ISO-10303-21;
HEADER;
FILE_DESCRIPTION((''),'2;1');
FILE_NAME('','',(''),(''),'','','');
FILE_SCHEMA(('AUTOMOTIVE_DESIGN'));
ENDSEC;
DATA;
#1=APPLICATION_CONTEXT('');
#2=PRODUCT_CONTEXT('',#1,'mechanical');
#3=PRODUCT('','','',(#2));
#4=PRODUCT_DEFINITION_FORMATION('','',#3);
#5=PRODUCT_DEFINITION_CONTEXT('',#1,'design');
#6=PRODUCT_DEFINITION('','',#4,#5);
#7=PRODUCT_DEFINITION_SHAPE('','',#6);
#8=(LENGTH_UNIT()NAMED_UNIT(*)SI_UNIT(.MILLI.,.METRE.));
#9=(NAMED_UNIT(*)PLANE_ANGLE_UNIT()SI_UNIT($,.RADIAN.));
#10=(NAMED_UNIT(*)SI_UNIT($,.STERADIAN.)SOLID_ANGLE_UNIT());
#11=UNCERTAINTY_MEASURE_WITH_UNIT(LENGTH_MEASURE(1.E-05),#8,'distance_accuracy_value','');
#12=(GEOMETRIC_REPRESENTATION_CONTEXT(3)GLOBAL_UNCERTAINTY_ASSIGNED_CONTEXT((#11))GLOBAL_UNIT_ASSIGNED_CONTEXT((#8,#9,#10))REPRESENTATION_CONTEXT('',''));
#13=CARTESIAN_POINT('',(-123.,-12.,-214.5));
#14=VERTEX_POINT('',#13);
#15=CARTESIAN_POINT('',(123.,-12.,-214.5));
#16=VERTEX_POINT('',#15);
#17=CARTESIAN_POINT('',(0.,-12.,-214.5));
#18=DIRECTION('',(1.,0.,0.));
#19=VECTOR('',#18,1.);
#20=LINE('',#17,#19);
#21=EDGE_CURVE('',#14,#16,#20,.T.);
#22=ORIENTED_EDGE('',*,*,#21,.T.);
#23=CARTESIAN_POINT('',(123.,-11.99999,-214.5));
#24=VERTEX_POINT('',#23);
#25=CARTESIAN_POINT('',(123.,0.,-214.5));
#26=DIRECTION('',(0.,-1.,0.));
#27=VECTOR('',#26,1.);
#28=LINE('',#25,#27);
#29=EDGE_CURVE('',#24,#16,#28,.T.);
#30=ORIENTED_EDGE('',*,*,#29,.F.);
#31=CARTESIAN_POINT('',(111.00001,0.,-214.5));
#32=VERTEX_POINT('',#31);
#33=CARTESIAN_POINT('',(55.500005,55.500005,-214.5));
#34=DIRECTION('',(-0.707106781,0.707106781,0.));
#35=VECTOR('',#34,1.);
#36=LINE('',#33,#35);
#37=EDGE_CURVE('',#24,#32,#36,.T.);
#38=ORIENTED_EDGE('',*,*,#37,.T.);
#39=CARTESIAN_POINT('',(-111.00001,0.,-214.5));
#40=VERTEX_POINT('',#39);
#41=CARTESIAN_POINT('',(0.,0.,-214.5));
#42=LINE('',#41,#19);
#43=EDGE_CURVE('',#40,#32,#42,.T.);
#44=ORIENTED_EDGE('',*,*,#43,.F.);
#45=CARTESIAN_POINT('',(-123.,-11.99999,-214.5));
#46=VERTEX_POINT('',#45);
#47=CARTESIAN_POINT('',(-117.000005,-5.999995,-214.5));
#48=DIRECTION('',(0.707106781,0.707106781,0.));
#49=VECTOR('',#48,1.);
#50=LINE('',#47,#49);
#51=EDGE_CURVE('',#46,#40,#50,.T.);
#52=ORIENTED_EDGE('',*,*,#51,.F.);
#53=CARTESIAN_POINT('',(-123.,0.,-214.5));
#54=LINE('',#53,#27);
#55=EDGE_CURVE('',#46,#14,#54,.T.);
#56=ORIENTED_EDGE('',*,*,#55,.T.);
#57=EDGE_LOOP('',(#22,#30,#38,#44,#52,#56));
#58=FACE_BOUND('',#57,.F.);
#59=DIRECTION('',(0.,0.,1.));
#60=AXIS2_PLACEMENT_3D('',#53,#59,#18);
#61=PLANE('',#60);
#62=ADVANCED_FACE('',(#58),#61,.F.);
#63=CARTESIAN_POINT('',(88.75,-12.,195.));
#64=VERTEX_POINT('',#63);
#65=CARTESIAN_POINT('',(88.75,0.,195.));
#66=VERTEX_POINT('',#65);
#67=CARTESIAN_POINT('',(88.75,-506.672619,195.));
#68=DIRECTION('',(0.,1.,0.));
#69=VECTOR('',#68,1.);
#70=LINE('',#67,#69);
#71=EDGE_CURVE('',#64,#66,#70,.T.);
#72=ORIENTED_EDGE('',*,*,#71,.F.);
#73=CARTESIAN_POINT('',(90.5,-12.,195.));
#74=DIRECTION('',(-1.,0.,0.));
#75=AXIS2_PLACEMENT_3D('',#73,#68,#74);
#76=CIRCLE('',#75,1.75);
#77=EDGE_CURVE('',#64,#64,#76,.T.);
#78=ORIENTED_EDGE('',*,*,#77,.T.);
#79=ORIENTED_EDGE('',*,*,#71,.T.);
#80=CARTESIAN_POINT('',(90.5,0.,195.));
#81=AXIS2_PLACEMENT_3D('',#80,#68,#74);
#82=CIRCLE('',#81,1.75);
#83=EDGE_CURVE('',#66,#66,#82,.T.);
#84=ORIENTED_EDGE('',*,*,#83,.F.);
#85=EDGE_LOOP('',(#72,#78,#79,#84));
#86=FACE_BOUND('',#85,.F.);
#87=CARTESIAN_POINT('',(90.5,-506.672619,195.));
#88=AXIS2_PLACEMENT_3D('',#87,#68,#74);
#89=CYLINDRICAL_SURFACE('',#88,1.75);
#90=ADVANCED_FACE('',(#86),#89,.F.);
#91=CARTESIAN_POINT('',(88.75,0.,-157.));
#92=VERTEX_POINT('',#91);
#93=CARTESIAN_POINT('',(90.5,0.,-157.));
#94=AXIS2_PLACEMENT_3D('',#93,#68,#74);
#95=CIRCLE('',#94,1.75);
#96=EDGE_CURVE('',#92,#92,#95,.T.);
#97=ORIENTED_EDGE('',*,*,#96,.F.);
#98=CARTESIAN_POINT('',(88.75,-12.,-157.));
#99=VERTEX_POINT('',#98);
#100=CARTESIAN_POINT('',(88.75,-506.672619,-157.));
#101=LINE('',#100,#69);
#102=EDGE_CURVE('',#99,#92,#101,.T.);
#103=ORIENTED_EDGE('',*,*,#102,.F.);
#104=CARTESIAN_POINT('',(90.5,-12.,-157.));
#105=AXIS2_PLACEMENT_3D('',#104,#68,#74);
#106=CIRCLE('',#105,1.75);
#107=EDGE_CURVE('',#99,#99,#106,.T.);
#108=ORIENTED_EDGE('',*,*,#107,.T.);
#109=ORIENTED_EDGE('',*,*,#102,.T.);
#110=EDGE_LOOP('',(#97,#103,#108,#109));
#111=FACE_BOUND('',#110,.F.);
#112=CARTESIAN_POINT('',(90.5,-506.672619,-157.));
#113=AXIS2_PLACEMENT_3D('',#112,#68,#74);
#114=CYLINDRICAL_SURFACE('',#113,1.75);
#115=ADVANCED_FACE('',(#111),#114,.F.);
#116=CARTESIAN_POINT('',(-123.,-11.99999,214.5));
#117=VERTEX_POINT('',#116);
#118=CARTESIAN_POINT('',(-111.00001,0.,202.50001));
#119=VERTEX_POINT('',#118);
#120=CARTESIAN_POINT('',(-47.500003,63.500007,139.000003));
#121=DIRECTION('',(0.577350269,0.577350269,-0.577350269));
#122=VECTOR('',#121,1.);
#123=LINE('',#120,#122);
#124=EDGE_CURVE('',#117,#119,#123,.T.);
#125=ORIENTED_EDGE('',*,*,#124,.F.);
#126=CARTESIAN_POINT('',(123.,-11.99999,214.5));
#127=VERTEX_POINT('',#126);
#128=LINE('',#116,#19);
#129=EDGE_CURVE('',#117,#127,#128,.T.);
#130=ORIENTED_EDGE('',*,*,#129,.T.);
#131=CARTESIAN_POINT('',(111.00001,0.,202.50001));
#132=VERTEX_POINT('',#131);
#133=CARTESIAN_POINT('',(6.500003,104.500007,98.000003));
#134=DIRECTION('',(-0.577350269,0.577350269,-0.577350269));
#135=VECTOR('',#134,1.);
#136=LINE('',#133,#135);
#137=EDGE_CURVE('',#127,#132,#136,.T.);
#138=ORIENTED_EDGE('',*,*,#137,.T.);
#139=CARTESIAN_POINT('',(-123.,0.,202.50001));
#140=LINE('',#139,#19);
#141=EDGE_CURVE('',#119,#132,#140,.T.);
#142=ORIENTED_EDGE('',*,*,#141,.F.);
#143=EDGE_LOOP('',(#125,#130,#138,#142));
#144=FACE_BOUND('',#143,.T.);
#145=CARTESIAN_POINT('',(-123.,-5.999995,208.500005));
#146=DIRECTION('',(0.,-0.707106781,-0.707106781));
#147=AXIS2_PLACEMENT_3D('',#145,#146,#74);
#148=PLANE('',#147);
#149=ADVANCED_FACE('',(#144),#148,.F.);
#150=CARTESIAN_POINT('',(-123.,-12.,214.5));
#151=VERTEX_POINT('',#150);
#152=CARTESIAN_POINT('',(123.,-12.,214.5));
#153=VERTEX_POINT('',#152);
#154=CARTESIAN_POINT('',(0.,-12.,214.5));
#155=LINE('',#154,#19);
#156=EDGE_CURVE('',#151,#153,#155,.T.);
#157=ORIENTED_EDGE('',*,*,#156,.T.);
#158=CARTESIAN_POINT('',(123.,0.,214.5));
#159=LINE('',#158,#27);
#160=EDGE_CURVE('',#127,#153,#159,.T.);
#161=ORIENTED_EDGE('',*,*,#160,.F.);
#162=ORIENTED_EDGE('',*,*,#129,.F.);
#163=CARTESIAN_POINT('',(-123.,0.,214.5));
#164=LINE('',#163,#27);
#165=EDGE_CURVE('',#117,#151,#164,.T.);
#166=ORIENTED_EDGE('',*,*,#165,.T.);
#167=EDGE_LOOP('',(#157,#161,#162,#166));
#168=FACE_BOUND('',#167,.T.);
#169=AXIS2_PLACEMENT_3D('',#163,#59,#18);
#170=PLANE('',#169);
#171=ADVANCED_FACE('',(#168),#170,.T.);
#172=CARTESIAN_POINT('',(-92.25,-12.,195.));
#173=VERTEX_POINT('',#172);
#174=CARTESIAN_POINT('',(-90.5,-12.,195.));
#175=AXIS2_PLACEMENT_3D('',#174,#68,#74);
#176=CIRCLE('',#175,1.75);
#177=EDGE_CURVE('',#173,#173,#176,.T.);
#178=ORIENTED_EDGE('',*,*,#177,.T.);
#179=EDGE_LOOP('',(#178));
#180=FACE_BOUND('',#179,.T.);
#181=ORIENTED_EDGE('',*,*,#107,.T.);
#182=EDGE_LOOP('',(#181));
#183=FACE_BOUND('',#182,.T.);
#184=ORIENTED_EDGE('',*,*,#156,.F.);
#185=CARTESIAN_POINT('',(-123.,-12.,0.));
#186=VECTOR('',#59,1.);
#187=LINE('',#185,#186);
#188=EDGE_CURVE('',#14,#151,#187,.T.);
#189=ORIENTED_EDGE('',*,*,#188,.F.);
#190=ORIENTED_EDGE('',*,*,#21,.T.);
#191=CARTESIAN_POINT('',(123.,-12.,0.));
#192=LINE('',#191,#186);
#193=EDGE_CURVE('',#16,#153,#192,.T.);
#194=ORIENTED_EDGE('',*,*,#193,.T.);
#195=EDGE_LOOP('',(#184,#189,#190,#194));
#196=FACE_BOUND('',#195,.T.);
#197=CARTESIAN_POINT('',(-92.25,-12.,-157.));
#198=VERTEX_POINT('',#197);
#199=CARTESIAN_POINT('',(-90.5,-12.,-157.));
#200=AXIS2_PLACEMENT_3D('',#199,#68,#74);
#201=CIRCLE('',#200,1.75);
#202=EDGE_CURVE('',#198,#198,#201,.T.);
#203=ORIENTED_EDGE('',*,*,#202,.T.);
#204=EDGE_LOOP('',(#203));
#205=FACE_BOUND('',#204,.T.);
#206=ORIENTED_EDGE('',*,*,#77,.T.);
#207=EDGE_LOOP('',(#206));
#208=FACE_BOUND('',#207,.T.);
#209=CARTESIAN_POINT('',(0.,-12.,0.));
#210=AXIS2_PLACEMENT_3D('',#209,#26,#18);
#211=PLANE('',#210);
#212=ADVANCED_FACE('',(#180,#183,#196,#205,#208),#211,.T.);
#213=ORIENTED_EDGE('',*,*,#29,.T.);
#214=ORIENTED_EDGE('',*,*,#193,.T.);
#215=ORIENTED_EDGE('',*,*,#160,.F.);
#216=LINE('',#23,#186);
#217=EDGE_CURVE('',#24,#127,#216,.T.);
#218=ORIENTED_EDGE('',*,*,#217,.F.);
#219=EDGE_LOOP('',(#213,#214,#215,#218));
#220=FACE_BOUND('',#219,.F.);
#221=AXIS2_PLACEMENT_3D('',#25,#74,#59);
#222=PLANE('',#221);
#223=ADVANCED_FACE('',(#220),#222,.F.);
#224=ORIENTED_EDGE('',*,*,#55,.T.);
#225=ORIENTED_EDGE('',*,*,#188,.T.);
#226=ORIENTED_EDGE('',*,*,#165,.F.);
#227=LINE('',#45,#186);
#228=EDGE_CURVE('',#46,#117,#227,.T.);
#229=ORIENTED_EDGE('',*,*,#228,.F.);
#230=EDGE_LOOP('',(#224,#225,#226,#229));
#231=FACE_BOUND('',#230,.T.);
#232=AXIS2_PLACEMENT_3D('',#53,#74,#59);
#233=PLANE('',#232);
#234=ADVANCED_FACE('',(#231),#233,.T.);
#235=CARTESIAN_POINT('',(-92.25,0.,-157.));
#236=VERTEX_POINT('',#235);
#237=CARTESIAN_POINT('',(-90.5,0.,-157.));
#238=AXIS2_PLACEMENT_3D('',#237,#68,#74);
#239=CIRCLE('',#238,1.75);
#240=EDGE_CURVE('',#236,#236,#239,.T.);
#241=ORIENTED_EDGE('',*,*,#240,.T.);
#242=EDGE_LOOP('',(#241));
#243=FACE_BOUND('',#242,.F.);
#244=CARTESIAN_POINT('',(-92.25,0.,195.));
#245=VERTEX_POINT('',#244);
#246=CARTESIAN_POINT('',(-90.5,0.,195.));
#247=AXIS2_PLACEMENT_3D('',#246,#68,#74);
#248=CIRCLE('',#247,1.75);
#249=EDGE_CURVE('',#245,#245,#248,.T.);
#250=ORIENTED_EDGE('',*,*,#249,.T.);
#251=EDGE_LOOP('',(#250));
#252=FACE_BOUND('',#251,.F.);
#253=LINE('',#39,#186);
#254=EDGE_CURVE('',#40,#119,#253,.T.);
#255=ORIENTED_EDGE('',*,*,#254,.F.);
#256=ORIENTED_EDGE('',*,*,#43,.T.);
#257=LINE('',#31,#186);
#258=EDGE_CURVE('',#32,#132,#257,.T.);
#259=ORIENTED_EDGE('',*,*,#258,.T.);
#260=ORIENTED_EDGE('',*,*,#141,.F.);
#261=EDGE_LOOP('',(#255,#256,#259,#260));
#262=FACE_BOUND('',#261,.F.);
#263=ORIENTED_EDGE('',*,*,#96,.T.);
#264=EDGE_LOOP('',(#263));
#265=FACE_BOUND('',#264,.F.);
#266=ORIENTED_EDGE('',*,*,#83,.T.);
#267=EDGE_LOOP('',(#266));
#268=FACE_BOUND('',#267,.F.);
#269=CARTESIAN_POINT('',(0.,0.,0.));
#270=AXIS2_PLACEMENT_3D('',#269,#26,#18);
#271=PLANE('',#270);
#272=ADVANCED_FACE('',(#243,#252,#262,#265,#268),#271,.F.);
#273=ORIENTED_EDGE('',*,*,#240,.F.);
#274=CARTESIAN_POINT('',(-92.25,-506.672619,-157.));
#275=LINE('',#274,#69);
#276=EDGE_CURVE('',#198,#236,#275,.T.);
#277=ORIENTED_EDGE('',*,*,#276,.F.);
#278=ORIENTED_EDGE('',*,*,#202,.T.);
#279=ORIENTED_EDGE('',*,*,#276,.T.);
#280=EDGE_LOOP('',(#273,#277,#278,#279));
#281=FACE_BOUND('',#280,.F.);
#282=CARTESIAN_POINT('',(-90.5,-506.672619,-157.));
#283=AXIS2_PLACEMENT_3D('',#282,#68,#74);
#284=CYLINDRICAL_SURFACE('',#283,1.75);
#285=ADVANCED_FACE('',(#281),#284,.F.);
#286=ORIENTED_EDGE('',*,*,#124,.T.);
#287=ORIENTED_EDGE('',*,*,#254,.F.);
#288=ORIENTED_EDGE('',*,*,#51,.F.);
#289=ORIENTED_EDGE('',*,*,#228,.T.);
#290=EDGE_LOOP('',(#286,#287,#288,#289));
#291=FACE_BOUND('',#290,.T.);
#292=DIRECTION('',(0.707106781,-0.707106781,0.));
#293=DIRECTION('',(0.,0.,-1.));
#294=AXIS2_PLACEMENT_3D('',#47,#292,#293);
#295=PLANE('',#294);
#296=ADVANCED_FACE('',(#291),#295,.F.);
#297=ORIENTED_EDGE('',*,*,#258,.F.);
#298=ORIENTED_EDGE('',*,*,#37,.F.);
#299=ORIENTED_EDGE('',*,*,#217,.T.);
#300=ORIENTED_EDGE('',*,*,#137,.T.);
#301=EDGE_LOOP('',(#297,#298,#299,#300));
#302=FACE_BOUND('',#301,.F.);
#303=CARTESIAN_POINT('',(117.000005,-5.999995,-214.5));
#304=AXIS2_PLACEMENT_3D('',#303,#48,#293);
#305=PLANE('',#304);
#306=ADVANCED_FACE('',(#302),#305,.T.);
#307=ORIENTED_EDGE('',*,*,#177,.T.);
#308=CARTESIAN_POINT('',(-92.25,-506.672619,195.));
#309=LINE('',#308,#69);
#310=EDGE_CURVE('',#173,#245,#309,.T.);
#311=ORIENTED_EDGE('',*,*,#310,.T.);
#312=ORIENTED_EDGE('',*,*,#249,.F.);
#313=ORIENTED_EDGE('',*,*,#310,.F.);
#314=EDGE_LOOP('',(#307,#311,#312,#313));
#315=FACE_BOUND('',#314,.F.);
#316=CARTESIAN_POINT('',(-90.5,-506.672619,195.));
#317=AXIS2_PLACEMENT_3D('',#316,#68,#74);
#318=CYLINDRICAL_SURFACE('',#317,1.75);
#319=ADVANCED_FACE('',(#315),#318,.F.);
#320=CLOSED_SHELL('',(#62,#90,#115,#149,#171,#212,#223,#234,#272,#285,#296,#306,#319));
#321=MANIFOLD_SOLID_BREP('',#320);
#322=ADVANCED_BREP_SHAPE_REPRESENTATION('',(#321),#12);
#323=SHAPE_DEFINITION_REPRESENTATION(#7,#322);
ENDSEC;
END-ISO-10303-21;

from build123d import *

# Parameters (mm, degrees)
F0_W     = 246
F0_H     = 429
F1_DEPTH = 12
F2_SIZE  = 11.99999
F4_D     = 3.5


# Not quite as in the source:
# - a fillet or chamfer is up to 0.001 mm smaller than in the source, because OpenCascade refuses the exact size
# - a feature names something its author has since deleted; it is built from what else it names


with BuildPart() as f1:
    # F0 (on Front) → F1 (new body)
    with BuildSketch(Plane.XZ):
        Rectangle(F0_W, F0_H)
    extrude(amount=F1_DEPTH)

    # F2 (size 12 in the source; OpenCascade refuses exactly that, so slightly less here)
    f2_edges = [f1.edges().sort_by_distance(p)[0] for p in [
        (123, 0, 0),
        (0, 0, 214.5),
        (-123, 0, 0),
    ]]
    chamfer(f2_edges, length=F2_SIZE)

    # F4 (through all)
    with Locations(Plane.XZ.offset(12)):
        with Locations((-90.5, 195), (90.5, 195), (-90.5, -157), (90.5, -157)):
            Hole(F4_D / 2)


solid = f1.part
